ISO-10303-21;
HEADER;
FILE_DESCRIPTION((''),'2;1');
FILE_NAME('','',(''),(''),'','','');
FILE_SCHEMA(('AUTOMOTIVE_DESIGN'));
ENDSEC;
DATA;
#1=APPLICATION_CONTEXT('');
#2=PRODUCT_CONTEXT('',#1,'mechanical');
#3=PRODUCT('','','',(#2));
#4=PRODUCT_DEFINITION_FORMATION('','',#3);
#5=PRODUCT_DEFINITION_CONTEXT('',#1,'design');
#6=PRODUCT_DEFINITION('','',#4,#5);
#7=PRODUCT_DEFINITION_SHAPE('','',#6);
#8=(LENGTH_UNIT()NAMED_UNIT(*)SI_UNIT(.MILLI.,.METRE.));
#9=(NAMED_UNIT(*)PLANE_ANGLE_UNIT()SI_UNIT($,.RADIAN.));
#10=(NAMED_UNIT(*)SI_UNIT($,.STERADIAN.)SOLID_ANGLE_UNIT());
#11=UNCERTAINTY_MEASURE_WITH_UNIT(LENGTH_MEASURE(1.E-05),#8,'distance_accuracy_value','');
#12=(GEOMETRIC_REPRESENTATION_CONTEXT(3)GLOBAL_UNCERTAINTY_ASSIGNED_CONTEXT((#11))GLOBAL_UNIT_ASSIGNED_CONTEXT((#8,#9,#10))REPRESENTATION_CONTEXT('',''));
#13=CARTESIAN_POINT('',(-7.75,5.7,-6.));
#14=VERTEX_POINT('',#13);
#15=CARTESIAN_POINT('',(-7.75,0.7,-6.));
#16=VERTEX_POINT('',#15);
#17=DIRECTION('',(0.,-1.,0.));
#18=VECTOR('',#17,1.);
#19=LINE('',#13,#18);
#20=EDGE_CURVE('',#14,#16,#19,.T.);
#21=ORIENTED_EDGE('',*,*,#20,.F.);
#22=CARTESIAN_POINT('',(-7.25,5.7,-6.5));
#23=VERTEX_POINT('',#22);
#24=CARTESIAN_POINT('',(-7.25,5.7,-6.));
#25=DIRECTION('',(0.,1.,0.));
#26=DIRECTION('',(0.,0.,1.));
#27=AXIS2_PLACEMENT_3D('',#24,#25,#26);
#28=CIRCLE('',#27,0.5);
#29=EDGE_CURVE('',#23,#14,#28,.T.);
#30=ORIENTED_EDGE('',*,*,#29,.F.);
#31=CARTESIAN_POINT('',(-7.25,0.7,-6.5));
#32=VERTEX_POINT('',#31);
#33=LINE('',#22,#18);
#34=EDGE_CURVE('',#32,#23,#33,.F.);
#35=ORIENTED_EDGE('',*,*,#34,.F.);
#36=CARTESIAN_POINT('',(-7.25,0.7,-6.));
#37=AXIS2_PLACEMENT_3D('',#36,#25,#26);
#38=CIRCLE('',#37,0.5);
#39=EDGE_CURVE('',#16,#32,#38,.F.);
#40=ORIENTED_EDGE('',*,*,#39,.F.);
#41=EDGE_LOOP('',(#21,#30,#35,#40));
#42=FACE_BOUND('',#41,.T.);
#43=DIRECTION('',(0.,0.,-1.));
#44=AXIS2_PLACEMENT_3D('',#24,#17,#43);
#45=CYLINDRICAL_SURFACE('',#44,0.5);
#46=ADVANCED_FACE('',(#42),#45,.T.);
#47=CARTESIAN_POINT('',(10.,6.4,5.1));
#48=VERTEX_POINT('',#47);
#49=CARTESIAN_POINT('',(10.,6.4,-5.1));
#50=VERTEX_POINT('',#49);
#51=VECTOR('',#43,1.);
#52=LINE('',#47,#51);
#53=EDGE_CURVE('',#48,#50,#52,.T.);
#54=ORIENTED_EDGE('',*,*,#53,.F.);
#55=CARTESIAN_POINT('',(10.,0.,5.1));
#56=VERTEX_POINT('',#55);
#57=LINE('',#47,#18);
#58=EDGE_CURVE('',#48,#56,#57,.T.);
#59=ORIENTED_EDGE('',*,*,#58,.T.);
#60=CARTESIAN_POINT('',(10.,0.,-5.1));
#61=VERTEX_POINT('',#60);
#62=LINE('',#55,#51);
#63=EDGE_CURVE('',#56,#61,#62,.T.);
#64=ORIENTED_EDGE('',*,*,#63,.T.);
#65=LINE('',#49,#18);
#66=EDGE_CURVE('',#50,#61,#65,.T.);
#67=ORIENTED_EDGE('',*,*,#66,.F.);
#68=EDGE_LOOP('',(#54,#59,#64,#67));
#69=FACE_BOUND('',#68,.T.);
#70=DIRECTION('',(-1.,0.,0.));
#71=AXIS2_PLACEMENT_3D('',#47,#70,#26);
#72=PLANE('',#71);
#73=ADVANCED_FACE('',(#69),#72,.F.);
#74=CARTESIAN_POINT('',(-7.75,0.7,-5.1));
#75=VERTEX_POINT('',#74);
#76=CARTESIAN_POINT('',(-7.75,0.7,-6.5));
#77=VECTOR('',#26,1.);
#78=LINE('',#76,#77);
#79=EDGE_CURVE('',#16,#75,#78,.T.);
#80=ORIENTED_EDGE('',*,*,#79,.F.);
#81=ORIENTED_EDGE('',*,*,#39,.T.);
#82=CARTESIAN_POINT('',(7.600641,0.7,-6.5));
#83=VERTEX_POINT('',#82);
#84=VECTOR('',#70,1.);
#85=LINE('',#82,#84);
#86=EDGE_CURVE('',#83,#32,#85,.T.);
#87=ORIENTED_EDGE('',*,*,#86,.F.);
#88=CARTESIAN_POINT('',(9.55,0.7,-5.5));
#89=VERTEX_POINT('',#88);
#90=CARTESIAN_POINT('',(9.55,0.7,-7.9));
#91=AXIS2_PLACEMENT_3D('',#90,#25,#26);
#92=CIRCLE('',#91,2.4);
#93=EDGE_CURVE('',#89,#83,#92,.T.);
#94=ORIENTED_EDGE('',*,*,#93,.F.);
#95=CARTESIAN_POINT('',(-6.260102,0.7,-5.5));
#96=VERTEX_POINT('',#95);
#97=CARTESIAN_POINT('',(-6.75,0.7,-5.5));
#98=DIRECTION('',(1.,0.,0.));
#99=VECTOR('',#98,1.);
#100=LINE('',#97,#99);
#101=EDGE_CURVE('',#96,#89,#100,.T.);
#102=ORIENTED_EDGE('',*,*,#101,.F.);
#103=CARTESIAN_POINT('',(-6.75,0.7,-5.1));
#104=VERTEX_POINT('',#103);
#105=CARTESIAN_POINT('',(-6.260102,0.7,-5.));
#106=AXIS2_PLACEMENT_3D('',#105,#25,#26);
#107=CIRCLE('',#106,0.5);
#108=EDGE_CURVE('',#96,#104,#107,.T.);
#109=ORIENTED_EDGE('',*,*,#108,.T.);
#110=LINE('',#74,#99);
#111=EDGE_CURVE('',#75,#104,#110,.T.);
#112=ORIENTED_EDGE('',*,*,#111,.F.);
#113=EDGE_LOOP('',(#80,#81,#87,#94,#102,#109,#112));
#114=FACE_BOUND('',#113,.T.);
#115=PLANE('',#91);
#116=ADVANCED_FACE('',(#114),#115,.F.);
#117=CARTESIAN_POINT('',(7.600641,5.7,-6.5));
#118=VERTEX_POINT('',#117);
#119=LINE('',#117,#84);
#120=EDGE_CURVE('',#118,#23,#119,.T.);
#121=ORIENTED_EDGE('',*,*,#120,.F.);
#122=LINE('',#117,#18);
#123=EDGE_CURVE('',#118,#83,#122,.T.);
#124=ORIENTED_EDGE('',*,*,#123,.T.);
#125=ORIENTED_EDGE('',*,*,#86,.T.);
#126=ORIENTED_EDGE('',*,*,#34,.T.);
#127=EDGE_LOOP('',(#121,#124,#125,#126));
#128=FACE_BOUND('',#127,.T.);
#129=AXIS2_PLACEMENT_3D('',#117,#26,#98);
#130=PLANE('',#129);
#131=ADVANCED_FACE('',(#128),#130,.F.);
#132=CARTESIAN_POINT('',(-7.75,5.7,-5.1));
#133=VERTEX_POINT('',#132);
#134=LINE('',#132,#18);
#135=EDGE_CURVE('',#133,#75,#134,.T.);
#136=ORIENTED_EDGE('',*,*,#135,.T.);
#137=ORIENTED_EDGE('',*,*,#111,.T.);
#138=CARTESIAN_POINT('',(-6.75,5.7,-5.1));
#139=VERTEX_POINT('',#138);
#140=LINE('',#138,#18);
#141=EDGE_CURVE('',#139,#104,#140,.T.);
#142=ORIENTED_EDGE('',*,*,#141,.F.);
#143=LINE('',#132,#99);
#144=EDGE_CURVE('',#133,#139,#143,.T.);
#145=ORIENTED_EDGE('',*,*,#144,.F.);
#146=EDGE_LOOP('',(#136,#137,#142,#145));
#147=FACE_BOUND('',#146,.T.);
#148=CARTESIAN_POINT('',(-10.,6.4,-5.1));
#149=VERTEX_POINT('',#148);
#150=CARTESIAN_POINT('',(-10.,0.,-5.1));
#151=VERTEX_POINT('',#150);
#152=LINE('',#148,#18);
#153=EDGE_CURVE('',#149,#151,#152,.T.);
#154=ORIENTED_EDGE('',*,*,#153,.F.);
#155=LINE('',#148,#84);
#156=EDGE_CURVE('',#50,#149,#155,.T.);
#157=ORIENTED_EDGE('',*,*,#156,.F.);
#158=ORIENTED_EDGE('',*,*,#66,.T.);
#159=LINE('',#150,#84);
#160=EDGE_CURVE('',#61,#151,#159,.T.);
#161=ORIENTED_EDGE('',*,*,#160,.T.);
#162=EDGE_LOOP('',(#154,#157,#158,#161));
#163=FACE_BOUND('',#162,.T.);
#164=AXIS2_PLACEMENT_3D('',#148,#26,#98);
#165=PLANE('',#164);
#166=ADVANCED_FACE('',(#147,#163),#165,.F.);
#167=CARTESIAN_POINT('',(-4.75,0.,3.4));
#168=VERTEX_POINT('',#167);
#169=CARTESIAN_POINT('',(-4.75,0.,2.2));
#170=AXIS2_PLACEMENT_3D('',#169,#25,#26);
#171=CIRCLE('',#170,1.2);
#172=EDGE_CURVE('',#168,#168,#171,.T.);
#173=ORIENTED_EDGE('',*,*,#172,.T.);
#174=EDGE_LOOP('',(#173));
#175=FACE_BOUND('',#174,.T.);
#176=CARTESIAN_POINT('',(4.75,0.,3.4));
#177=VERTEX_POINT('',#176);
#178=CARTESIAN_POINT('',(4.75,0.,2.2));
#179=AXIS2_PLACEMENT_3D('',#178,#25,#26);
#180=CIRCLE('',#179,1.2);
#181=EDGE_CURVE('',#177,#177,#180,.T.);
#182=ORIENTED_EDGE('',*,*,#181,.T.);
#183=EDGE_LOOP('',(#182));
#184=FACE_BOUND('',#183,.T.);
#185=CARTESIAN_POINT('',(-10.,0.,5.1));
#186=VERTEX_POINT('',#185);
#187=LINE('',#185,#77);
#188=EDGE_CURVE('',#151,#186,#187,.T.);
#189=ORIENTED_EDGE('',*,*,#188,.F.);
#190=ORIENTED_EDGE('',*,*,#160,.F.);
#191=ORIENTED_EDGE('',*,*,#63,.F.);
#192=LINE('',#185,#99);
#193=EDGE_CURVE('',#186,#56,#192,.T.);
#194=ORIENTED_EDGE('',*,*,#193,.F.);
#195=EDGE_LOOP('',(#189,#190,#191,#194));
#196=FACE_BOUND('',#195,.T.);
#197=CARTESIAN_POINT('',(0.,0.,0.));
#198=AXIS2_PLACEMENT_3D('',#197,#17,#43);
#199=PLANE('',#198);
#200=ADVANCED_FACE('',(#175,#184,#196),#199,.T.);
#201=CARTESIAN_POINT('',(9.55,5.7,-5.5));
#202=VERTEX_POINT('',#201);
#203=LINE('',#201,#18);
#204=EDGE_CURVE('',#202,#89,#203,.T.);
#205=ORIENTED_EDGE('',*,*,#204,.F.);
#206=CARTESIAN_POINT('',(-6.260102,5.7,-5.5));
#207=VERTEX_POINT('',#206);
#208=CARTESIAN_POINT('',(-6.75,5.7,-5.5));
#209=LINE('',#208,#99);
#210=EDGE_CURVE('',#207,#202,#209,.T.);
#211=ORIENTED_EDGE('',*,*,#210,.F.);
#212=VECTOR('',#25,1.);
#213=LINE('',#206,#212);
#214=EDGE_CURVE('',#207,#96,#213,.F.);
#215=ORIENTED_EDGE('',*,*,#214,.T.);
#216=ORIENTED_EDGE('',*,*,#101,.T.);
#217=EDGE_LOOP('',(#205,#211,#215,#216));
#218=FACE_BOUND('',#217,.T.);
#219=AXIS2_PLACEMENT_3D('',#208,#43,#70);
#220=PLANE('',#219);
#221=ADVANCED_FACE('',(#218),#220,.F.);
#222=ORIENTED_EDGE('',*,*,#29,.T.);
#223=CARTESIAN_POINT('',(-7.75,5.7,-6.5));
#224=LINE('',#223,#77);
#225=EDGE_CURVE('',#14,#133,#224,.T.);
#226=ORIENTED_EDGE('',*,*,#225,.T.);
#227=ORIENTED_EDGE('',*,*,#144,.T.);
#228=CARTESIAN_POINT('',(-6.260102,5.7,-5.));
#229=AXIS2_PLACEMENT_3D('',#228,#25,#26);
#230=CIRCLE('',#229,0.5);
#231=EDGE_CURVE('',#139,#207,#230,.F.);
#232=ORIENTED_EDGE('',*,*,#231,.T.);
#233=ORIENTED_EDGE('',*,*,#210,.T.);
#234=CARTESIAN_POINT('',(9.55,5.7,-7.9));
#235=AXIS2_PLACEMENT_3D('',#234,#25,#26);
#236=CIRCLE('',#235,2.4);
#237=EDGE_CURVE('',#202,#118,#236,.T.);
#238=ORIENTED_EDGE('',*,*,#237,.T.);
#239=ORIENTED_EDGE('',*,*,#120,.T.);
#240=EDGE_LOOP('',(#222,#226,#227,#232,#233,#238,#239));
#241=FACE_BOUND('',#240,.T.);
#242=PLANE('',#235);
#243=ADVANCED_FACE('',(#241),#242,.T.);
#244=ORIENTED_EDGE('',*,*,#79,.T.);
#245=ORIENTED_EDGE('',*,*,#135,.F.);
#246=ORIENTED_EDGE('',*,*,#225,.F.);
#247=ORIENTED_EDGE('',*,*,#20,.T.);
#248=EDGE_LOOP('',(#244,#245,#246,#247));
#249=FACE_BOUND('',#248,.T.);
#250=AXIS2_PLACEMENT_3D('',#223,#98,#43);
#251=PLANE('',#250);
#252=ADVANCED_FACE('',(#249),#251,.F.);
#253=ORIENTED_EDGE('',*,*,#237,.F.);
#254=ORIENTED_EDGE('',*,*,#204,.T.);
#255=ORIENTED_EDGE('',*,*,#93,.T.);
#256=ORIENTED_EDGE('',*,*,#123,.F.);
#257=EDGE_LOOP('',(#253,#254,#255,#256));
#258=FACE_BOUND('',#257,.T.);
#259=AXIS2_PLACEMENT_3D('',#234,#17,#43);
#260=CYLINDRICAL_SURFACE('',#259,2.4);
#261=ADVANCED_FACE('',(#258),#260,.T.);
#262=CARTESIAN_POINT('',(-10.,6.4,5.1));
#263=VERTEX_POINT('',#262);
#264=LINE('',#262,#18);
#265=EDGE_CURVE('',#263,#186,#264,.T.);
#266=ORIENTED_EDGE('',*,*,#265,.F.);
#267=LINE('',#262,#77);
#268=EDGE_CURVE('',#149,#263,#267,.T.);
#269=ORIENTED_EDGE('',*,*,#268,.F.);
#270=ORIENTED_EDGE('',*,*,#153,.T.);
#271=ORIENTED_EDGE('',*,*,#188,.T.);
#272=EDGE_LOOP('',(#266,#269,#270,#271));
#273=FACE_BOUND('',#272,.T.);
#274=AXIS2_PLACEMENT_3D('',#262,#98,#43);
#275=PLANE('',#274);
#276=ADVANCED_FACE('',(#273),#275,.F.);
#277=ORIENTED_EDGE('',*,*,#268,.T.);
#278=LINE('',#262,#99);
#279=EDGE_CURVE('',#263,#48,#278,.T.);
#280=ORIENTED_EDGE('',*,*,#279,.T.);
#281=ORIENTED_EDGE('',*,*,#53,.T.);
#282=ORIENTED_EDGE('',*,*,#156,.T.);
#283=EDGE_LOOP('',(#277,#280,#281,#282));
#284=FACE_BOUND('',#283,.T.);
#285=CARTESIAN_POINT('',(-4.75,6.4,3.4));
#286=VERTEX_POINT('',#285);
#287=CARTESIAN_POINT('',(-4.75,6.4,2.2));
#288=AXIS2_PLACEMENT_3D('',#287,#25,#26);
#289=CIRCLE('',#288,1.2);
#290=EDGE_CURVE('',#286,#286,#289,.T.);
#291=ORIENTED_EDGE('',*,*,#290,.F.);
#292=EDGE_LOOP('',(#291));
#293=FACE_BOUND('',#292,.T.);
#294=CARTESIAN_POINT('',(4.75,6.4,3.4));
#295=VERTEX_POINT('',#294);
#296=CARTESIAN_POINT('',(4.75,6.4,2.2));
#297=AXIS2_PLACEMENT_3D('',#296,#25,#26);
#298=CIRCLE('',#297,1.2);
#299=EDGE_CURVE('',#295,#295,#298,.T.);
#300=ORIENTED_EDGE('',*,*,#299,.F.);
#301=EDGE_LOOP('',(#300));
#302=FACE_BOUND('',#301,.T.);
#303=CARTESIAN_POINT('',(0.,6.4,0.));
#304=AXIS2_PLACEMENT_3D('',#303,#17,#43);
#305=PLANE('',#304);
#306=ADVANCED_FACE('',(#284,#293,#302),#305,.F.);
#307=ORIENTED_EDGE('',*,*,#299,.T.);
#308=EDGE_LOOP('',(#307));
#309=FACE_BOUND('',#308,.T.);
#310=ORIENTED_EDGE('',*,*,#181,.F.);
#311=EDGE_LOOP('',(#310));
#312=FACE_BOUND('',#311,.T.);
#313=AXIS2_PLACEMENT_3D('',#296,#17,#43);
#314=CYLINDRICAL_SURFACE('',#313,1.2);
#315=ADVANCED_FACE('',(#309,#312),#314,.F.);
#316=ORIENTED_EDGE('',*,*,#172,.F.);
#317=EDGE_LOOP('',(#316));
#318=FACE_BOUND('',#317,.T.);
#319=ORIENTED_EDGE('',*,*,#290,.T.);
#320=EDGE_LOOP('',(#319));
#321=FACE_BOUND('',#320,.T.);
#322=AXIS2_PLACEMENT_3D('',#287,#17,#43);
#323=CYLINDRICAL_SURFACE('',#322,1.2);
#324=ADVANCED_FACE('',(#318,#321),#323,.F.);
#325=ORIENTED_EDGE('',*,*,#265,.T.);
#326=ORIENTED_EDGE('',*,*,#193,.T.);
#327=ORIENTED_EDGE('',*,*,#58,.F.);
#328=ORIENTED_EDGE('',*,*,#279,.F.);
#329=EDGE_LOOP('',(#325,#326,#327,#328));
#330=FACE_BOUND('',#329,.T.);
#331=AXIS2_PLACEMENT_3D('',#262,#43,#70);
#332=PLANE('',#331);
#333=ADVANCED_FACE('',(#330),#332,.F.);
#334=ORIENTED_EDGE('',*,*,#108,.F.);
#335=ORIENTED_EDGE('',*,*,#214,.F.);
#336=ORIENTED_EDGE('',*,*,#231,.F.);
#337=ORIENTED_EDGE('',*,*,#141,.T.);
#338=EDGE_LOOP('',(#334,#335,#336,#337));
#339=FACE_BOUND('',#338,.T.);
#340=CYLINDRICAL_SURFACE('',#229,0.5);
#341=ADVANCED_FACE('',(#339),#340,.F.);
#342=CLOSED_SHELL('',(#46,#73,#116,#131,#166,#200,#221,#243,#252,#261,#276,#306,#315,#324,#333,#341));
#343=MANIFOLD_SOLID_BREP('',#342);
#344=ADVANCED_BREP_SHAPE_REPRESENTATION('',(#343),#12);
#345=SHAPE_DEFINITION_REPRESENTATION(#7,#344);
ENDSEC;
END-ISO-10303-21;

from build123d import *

# Parameters (mm, degrees)
SKETCH1_W           = 20
SKETCH1_H           = 10.2
SKETCH1_R           = 1.2
BOSS_EXTRUDE1_DEPTH = 6.4
BOSS_EXTRUDE2_DEPTH = 2.5
FILLET1_R           = 0.5


with BuildPart() as part:
    # Sketch1 → Boss-Extrude1 (new body)
    with BuildSketch(Plane(origin=(0, 0, 0), x_dir=(1, 0, 0), z_dir=(0, 1, 0))):
        Rectangle(SKETCH1_W, SKETCH1_H)
        with Locations(Location((-4.75, -2.2, 0), (0, 0, 270))):
            Circle(SKETCH1_R, mode=Mode.SUBTRACT)
        with Locations(Location((4.75, -2.2, 0), (0, 0, 270))):
            Circle(SKETCH1_R, mode=Mode.SUBTRACT)
    extrude(amount=BOSS_EXTRUDE1_DEPTH)

    # Sketch4 → Boss-Extrude2 (add, symmetric)
    with BuildSketch(Plane(origin=(0, 3.2, 0), x_dir=(1, 0, 0), z_dir=(0, 1, 0))):
        with BuildLine():
            Line((-6.75, 5.1), (-6.75, 5.5))
            Line((-6.75, 5.5), (9.55, 5.5))
            ThreePointArc((9.55, 5.5), (10.645445115, 10.03541565), (7.600641131, 6.5))
            Line((7.600641131, 6.5), (-7.75, 6.5))
            Line((-7.75, 6.5), (-7.75, 5.1))
            Line((-7.75, 5.1), (-6.75, 5.1))
        make_face()
    extrude(amount=BOSS_EXTRUDE2_DEPTH, both=True)

    # Fillet1
    # the kernel refuses this fillet: 0.5 mm, written as the material it adds along each edge
    with BuildSketch(Plane(origin=(-6.75, 0.7, -5.5), x_dir=(1.5765166949672097e-12, 0, 1.0), z_dir=(0, 1, 0))) as fillet1_piece_1:
        with BuildLine():
            CenterArc((0.5, 0.489897949), FILLET1_R, 180, 78.463040967)
            Line((0, 0.489897949), (0, 0))
            Line((0, 0), (0.4, 0))
        make_face()
    extrude(amount=5)
    # the kernel refuses this fillet: 0.5 mm, written as the material it takes off along each edge
    with BuildSketch(Plane(origin=(-7.75, 6.95, -6.5), x_dir=(0, 0, 1), z_dir=(0, -1, 0))) as fillet1_2_piece_1:
        with BuildLine():
            CenterArc((FILLET1_R, -FILLET1_R), FILLET1_R, 90, 90)
            Line((0, -FILLET1_R), (0, 0))
            Line((0, 0), (FILLET1_R, 0))
        make_face()
    extrude(amount=7.5, mode=Mode.SUBTRACT)


solid = part.part
